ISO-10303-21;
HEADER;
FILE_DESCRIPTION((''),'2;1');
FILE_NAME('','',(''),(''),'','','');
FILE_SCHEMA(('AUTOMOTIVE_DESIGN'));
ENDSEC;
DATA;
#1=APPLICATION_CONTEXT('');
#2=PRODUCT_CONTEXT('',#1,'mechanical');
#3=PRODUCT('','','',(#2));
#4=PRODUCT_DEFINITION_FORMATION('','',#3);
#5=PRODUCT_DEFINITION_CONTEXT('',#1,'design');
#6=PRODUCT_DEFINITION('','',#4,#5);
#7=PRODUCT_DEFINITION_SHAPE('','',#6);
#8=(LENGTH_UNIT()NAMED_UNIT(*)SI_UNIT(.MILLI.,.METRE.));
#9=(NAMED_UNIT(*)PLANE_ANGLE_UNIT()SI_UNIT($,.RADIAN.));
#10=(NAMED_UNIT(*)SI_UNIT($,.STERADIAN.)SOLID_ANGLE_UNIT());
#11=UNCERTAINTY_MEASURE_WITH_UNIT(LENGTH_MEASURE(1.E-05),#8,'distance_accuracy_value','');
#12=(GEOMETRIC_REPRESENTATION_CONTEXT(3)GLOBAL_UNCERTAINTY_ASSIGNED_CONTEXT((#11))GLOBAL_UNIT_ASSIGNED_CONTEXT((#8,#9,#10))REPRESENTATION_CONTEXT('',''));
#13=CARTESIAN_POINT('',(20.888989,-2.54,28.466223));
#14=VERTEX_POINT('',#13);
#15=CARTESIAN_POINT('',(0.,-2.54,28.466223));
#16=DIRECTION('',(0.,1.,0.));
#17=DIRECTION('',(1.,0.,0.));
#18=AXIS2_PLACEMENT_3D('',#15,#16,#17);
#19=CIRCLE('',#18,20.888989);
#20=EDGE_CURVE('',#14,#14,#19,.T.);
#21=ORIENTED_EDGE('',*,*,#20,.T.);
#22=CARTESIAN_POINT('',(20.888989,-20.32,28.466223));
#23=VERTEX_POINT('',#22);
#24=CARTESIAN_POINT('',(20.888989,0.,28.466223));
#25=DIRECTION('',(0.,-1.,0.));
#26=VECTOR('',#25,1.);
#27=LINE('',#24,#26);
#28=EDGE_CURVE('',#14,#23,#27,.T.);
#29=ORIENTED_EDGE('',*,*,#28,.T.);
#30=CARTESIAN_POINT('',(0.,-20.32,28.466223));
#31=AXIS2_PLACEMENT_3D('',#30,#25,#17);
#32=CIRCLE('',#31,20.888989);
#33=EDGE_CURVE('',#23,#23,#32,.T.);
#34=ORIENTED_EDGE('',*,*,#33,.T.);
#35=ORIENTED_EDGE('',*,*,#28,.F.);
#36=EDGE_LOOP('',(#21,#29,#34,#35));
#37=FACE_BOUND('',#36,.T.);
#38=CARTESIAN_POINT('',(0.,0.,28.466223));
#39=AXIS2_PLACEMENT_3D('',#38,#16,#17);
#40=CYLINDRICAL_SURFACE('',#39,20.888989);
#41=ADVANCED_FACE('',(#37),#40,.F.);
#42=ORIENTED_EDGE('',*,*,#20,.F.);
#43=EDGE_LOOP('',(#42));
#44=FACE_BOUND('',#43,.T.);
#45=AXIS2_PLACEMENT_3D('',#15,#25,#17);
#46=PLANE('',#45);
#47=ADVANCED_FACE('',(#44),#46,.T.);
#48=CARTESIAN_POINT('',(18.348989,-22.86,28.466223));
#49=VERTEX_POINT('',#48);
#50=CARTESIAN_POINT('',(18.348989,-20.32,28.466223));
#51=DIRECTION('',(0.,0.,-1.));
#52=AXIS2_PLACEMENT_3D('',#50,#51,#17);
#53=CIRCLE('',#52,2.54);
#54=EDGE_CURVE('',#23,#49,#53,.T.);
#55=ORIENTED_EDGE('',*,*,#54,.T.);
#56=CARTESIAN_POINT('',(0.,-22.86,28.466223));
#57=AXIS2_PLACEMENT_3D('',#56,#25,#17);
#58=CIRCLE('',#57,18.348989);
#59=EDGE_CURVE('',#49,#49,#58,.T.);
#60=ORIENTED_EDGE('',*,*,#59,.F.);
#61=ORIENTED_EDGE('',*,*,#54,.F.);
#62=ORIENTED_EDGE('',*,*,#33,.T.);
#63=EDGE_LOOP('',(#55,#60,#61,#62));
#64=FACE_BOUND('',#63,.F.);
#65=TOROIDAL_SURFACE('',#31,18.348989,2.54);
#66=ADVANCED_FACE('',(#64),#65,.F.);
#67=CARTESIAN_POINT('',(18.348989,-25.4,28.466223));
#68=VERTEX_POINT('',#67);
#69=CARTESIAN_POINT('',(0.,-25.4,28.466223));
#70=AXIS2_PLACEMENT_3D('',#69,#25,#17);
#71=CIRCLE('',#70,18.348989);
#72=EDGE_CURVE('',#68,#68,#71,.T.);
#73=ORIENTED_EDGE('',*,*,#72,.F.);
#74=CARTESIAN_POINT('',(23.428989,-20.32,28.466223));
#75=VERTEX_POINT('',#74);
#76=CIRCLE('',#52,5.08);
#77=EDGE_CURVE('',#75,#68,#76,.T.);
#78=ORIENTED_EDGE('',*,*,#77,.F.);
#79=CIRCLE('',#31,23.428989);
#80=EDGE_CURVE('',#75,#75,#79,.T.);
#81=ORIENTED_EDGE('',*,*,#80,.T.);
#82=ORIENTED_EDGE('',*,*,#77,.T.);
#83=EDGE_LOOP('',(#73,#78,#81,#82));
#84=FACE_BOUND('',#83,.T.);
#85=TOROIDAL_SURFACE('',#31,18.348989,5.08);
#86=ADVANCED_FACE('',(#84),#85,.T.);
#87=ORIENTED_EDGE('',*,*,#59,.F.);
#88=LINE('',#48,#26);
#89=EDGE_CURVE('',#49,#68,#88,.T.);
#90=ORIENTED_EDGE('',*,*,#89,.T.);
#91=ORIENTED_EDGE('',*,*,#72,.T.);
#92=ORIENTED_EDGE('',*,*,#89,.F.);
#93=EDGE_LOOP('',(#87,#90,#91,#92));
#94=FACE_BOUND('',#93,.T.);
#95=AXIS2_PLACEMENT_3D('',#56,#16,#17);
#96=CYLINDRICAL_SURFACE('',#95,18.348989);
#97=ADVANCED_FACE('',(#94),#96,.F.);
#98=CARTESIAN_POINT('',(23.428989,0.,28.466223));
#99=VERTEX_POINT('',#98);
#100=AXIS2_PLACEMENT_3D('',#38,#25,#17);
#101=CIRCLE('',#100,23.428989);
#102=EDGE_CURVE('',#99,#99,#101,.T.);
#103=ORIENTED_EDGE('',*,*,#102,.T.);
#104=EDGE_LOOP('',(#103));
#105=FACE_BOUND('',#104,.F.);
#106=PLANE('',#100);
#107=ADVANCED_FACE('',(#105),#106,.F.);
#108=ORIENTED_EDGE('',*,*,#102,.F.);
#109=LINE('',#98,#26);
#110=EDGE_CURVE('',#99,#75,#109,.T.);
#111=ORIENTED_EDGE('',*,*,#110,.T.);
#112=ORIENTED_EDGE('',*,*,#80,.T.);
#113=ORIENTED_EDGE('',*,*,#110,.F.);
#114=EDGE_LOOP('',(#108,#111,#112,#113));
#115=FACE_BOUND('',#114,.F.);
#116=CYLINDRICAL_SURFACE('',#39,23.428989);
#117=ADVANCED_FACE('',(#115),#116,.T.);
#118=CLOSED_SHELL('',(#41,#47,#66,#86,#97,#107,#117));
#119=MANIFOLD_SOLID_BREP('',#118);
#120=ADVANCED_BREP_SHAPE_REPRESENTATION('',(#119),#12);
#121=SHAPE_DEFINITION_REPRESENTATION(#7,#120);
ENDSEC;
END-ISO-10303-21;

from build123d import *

# Parameters (mm, degrees)
F2_R     = 23.428989388
F3_DEPTH = 25.4
F4_R     = 5.08
F5_T     = -2.54


# Not quite as in the source:
# - a shell that OpenCascade refuses in one call is made with other operations: the cavity is built on its own and cut out
# - the program builds the solid bodies; features that only make, move or delete a surface that nothing else refers to are left out


with BuildPart() as f3:
    # F2 (on Front) → F3 (new body)
    with BuildSketch(Plane.XZ):
        with Locations((0, 28.4662228078)):
            Circle(F2_R)
    extrude(amount=F3_DEPTH)

    # F4
    f4_edges = [f3.edges().sort_by_distance(p)[0] for p in [
        (-23.428989, -25.4, 28.466223),
    ]]
    fillet(f4_edges, radius=F4_R)

    # F5: a shell. OpenCascade refuses it in one call, so the cavity is built on its own and cut out:
    # the body offset inwards by the wall thickness, plus a prism from it out through each open face.
    f5_core = offset(f3.part, amount=F5_T, mode=Mode.PRIVATE)
    f5_exits = [f5_core.faces().sort_by_distance(p)[0] for p in [
        (0, -22.86, 28.466223),
    ]]
    add(f5_core, mode=Mode.SUBTRACT)
    extrude(f5_exits, amount=-F5_T, mode=Mode.SUBTRACT)


solid = f3.part
